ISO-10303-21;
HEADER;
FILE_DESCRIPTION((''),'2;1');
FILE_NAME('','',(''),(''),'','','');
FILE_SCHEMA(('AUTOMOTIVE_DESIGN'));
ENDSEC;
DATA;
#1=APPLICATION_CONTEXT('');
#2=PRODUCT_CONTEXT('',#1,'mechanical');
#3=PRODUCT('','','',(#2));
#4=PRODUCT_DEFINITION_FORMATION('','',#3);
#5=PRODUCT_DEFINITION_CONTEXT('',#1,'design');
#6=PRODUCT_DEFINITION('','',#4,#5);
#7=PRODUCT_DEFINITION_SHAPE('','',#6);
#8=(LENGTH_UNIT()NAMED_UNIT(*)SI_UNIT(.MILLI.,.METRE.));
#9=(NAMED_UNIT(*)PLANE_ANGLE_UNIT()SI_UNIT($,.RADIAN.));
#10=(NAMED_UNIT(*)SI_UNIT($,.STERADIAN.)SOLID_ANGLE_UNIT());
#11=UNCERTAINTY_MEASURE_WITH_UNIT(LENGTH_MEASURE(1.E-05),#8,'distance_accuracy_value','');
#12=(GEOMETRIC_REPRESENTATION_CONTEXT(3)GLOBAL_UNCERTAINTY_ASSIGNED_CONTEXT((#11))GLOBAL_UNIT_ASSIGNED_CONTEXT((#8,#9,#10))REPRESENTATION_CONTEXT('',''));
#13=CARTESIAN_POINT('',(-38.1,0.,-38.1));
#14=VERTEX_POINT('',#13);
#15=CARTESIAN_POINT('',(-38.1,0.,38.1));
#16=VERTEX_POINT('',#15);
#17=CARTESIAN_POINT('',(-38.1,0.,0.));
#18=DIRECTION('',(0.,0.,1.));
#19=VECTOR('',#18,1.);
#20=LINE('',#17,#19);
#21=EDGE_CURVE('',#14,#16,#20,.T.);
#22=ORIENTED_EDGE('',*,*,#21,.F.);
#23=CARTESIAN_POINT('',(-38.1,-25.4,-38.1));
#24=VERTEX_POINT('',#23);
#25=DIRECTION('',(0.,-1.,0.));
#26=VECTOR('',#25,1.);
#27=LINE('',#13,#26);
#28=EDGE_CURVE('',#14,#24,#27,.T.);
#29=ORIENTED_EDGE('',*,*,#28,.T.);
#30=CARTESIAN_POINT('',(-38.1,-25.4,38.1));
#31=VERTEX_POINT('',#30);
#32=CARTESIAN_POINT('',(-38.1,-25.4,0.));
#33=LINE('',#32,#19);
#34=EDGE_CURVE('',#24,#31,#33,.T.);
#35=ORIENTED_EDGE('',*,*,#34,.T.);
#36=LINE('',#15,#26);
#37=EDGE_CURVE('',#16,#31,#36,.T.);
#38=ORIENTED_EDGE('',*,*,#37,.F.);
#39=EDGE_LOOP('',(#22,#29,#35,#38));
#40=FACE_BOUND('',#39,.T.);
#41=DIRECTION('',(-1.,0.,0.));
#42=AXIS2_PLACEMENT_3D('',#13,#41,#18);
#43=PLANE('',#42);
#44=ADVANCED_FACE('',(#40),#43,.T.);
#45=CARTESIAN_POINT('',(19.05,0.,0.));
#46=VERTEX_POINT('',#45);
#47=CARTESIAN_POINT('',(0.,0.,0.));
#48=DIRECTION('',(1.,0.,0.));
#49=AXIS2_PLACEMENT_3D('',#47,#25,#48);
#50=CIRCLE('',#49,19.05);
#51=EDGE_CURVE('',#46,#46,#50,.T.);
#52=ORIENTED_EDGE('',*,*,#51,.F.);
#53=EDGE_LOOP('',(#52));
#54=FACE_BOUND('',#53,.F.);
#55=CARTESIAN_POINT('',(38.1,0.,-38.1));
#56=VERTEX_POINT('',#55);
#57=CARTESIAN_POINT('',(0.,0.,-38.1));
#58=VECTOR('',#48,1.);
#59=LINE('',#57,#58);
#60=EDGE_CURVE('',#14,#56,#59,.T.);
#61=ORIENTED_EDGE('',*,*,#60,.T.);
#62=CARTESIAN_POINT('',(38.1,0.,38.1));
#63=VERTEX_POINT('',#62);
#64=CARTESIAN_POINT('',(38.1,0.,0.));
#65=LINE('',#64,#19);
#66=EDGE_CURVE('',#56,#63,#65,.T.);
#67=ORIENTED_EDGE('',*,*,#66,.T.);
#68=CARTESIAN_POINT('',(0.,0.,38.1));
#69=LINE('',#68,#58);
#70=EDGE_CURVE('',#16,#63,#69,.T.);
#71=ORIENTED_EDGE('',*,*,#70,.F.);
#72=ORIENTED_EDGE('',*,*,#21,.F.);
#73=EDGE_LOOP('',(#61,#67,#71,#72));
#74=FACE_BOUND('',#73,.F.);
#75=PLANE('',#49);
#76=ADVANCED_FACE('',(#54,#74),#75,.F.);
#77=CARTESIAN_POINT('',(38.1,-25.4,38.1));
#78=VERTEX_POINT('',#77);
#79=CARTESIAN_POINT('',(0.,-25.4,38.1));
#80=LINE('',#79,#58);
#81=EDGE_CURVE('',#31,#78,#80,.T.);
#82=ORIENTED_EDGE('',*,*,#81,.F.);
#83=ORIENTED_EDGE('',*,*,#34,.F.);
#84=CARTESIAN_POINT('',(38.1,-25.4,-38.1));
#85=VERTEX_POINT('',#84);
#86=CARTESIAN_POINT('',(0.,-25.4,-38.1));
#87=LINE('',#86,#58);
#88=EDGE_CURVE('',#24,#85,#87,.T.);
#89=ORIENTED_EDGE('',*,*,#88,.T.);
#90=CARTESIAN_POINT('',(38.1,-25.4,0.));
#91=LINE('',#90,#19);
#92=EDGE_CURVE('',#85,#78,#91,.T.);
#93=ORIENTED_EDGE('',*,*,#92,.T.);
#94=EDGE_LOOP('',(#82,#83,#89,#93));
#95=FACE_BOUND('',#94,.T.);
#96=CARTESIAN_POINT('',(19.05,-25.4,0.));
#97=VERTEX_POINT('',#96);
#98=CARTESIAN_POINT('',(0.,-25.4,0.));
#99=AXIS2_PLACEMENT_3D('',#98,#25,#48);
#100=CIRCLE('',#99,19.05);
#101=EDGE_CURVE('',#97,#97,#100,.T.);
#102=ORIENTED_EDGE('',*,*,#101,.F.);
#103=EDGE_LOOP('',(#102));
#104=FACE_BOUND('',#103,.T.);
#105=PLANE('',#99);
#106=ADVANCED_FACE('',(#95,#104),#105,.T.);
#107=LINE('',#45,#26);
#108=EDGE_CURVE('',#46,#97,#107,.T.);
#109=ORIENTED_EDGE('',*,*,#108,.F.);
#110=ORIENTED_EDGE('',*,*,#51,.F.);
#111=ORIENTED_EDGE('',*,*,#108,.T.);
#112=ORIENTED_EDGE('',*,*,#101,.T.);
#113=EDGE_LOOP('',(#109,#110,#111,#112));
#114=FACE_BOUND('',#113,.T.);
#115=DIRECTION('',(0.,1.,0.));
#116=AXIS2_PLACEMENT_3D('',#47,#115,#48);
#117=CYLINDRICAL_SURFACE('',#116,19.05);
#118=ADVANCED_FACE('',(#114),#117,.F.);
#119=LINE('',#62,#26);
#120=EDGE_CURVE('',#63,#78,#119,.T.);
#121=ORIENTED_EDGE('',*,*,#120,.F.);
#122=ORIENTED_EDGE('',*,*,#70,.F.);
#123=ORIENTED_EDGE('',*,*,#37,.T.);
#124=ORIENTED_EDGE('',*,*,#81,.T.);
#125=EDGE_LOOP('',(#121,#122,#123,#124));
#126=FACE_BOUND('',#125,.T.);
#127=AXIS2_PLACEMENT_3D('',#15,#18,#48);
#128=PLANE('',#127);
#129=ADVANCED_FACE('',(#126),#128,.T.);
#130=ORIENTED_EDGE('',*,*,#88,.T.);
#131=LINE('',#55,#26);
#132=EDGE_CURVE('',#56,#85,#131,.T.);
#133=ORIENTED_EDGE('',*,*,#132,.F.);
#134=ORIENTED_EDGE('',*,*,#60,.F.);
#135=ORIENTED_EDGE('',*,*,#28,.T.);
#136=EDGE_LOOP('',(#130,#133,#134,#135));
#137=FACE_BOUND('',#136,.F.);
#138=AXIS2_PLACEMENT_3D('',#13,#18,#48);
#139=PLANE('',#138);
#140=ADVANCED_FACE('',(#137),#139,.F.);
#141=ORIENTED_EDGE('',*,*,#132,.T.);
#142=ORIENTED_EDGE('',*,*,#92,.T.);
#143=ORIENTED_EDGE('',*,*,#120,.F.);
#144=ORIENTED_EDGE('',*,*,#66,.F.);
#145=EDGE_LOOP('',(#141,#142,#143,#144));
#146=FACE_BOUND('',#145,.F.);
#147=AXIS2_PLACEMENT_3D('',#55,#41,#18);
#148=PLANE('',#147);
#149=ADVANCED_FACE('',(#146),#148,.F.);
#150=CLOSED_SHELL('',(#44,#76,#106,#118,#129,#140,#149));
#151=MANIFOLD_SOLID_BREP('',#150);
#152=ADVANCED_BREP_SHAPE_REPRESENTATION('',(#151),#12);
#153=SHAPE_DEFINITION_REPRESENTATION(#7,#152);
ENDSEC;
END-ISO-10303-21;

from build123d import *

# Parameters (mm, degrees)
F0_W     = 76.2
F0_H     = 76.2
F0_R     = 19.05
F1_DEPTH = 25.4


# Not quite as in the source:
# - the program builds the solid bodies; features that only make, move or delete a surface that nothing else refers to are left out


with BuildPart() as f1:
    # F0 (on Front) → F1 (new body)
    with BuildSketch(Plane.XZ):
        Rectangle(F0_W, F0_H)
        Circle(F0_R, mode=Mode.SUBTRACT)
    extrude(amount=F1_DEPTH)


solid = f1.part
